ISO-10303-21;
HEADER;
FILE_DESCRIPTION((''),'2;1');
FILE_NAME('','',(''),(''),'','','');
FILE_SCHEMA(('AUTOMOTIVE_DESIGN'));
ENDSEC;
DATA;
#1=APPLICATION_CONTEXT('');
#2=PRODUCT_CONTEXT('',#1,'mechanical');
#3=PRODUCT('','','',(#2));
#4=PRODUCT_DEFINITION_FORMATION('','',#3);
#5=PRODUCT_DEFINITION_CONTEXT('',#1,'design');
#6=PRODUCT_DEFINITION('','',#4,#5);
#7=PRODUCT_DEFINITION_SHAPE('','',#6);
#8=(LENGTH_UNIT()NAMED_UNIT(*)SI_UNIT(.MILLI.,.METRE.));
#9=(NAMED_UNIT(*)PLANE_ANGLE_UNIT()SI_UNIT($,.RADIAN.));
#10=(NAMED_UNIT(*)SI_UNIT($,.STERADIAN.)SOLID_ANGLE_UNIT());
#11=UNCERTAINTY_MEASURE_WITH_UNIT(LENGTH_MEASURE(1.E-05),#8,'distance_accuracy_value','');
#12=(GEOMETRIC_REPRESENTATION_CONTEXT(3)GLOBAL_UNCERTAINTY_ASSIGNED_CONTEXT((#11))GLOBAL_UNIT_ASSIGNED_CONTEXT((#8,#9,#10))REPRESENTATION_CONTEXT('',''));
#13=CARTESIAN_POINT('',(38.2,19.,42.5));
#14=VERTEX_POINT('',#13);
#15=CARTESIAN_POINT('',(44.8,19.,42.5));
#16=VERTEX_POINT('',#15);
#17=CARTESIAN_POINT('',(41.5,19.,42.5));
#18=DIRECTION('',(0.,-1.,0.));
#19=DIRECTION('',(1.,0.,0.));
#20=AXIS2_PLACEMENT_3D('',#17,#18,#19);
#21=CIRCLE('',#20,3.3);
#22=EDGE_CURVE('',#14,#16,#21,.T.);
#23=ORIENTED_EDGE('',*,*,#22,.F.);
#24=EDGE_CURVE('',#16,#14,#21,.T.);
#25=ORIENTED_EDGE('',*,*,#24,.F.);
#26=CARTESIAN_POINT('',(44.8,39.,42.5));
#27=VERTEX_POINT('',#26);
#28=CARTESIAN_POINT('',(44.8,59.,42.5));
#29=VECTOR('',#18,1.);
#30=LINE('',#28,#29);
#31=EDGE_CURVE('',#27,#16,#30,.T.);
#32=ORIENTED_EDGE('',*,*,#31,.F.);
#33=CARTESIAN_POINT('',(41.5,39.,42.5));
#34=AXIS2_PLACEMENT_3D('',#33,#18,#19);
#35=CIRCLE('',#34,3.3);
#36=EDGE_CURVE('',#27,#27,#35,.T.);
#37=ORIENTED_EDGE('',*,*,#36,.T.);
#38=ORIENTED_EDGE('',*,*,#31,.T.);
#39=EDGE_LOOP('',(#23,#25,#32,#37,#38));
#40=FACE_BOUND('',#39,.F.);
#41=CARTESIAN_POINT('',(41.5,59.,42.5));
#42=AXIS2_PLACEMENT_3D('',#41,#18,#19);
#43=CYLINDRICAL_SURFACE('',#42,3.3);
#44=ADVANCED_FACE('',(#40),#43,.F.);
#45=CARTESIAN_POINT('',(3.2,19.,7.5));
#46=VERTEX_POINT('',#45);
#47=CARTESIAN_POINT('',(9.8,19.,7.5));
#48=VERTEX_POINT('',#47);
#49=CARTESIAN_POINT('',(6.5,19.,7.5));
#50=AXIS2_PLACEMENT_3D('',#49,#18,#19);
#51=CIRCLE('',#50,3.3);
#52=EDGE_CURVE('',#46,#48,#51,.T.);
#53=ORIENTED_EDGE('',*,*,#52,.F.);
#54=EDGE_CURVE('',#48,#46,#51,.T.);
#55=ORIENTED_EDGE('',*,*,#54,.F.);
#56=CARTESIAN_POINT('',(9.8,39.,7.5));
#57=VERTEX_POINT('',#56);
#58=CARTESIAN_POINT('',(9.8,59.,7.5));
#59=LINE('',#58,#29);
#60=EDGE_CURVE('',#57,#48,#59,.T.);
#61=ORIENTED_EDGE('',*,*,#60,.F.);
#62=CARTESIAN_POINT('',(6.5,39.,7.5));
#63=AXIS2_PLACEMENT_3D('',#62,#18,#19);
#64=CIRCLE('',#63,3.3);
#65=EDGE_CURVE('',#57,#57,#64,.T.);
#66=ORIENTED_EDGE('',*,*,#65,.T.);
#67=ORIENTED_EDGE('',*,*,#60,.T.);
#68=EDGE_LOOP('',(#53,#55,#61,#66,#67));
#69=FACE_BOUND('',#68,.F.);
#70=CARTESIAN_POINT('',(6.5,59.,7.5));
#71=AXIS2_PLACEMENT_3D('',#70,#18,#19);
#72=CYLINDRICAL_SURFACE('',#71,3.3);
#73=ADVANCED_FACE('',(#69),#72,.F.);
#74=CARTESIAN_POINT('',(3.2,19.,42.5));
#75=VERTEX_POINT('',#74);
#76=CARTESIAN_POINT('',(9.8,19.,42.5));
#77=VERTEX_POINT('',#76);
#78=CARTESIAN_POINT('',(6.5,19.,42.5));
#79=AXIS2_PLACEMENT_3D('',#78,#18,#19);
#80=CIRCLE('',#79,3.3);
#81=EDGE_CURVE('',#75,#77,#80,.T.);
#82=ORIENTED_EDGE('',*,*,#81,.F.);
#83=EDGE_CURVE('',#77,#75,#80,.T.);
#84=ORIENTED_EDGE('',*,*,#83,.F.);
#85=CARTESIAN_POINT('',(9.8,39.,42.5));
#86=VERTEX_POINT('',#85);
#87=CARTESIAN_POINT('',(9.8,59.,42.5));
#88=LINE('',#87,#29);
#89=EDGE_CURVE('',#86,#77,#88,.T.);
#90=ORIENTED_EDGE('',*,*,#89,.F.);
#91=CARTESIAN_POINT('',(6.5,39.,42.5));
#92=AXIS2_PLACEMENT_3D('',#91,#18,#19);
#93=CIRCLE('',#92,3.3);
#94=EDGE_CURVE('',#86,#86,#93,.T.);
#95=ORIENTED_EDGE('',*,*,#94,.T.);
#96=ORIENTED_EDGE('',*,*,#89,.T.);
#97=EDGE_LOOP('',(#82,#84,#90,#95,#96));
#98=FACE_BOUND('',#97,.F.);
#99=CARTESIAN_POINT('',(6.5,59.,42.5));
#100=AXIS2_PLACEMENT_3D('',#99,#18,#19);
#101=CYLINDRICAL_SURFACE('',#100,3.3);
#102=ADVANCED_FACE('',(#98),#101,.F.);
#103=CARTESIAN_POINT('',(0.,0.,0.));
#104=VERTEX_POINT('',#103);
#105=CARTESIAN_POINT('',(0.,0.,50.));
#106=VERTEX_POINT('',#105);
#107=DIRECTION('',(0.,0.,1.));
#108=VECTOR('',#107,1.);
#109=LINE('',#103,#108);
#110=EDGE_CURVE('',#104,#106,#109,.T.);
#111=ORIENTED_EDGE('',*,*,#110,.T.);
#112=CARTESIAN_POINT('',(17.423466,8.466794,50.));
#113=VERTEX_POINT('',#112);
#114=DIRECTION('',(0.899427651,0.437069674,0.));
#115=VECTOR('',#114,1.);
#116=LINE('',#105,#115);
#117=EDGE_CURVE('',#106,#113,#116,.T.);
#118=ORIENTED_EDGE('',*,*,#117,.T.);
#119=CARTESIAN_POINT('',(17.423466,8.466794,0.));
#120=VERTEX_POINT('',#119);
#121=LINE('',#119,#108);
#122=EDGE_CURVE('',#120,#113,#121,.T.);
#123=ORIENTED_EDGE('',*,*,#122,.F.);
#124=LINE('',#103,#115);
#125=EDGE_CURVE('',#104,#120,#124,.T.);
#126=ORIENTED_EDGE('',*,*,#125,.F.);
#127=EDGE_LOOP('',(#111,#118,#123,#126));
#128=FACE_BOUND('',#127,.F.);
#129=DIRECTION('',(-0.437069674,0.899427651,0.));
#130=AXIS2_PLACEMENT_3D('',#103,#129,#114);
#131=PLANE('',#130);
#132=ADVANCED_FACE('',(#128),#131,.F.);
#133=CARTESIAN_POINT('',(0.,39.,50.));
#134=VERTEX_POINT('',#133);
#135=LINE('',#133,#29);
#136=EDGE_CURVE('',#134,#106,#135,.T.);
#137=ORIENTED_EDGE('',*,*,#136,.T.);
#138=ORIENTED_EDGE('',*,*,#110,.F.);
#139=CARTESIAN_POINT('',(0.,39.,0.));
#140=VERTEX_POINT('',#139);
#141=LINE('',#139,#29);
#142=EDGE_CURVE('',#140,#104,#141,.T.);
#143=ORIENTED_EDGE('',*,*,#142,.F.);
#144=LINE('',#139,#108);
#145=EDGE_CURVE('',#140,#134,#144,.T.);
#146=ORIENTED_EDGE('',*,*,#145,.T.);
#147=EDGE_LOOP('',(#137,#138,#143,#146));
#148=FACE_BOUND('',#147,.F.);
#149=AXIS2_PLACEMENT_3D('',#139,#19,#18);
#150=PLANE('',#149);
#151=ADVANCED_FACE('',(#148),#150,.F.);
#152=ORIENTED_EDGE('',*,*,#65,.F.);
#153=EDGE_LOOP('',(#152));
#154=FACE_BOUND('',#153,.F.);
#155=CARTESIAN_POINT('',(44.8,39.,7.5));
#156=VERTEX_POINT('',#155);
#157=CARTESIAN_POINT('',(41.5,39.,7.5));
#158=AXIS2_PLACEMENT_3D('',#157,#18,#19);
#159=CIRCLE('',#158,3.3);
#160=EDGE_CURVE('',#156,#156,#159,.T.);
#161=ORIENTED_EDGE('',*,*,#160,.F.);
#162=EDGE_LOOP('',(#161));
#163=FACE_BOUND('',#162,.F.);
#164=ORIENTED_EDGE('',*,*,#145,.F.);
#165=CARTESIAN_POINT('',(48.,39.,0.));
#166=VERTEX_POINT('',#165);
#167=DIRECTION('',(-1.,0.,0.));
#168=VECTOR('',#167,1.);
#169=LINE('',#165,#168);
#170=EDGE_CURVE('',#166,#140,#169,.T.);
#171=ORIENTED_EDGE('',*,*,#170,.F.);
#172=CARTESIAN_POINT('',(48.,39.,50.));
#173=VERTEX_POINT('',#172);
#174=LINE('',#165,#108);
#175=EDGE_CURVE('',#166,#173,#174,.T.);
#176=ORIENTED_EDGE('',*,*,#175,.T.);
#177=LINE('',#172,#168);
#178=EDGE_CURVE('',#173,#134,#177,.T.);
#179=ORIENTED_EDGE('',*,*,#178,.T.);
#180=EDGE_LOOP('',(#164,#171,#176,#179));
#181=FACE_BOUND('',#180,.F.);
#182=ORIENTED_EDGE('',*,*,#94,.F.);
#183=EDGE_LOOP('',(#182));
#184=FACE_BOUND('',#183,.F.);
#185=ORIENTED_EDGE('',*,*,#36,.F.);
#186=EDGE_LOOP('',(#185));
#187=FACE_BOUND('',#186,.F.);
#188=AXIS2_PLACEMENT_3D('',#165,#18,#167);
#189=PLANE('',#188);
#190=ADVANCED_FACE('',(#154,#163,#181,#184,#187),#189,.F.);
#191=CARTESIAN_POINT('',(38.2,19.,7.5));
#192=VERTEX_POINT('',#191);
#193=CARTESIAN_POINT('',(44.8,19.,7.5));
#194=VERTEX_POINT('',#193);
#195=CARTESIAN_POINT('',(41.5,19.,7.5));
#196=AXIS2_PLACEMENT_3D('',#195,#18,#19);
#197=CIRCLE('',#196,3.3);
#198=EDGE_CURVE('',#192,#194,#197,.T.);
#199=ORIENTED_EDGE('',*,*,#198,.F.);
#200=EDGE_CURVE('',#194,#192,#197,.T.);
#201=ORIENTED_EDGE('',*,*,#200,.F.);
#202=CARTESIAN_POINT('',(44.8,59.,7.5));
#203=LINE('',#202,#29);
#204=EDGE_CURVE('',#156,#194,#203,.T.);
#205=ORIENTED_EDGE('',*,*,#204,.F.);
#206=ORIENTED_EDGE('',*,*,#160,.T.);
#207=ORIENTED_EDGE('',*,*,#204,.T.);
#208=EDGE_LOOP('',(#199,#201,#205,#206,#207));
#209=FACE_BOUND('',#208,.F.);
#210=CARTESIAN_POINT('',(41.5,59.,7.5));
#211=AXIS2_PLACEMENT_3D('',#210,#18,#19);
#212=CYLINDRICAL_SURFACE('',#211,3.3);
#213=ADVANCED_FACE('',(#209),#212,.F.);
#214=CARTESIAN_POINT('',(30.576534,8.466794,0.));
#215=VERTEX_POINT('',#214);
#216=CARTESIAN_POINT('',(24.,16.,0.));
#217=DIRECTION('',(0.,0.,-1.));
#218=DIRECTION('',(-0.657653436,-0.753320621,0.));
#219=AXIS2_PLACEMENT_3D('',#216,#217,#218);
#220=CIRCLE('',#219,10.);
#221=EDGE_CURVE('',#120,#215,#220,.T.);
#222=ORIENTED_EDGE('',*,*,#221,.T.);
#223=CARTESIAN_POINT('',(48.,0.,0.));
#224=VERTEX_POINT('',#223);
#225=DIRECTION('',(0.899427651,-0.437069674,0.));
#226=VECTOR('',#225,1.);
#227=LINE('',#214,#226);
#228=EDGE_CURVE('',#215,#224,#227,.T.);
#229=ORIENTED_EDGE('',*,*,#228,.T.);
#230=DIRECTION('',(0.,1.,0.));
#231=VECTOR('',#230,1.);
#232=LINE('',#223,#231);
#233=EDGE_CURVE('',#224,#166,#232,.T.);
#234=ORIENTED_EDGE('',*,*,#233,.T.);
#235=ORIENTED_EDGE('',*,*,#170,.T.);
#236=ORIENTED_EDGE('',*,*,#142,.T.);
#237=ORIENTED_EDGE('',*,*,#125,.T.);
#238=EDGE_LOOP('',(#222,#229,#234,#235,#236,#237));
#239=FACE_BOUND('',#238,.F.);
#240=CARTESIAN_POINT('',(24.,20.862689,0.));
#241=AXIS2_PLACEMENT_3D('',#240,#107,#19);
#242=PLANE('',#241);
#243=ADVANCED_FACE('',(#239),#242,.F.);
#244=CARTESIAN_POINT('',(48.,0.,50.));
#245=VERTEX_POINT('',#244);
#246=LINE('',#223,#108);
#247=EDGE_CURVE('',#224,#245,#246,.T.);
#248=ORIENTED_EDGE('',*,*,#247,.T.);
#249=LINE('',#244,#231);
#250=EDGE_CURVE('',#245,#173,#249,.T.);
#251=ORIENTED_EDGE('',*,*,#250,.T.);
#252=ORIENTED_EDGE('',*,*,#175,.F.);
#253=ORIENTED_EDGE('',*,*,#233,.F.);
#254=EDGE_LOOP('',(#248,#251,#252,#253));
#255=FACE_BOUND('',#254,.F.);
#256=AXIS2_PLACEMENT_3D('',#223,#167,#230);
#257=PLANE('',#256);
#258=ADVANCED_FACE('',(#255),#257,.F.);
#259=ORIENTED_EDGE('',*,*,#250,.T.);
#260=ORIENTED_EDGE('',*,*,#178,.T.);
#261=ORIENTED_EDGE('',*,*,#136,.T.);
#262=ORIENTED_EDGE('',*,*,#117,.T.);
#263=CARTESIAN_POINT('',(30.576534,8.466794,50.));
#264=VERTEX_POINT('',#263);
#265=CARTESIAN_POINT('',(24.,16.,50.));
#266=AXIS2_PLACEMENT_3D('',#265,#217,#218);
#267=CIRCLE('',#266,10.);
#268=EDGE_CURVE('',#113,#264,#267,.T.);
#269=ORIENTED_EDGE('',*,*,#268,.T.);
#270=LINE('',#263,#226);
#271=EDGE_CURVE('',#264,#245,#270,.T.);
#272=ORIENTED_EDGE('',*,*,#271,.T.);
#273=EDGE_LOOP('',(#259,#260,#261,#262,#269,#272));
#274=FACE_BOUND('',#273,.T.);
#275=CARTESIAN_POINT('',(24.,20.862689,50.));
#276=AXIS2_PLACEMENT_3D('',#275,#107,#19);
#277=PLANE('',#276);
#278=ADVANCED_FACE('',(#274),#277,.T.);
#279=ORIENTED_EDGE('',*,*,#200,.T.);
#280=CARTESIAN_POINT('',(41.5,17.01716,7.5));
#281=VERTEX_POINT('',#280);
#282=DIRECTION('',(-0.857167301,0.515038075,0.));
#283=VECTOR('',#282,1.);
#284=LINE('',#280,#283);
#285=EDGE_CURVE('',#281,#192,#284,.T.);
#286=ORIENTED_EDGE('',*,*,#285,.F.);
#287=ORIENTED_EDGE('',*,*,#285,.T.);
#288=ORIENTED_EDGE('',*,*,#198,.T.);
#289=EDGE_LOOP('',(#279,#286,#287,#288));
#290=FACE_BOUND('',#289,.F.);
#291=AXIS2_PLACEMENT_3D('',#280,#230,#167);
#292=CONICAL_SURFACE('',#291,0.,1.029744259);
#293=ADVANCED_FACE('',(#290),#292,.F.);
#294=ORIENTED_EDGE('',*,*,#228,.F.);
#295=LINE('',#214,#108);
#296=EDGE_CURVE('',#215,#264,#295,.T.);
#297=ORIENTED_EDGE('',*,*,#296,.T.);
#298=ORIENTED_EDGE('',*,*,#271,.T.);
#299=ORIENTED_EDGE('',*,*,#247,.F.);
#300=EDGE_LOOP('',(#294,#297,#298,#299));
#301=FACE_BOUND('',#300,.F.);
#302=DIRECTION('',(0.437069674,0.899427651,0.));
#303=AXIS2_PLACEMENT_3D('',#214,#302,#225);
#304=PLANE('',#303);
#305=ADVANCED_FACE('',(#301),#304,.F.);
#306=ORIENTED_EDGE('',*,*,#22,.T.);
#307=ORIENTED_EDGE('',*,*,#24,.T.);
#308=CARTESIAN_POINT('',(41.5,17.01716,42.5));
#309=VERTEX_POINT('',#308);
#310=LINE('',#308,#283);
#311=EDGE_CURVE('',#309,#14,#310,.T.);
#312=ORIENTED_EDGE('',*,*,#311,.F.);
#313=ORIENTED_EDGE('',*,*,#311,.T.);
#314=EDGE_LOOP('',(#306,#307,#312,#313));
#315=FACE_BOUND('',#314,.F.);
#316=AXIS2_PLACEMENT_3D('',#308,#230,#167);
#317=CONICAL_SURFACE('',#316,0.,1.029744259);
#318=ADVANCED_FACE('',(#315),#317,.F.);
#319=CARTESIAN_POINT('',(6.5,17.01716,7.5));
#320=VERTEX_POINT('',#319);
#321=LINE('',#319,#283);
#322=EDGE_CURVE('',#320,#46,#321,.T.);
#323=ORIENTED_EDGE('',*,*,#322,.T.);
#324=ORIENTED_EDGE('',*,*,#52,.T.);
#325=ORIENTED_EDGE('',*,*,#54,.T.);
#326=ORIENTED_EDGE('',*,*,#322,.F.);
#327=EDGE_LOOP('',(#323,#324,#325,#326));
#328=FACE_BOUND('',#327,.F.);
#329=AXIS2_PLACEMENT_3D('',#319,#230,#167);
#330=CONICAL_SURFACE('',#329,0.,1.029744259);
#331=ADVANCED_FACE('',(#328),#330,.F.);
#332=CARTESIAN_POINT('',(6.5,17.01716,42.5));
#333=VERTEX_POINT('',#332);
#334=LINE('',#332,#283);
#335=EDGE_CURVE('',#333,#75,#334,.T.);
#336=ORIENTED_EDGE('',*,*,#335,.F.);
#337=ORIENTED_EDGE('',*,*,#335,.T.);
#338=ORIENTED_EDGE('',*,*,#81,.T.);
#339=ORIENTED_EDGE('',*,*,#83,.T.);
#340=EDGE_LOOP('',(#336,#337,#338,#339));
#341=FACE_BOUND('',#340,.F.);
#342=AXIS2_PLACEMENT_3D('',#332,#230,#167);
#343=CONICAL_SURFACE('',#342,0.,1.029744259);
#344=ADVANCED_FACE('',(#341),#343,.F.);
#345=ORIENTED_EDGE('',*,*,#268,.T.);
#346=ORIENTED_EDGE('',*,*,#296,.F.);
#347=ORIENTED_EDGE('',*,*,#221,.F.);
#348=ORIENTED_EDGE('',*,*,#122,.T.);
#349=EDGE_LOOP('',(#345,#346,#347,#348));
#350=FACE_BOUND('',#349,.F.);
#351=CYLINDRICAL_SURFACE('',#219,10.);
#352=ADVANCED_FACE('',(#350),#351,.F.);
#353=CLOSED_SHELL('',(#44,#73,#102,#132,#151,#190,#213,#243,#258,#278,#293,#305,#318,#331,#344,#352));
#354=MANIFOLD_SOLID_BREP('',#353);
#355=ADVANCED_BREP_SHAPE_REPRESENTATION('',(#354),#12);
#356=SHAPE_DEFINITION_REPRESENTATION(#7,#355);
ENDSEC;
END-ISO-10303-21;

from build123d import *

# Parameters (mm, degrees)
F1_DEPTH = 50
F3_D     = 6.6
F3_DEPTH = 20
F3_TIP   = 1.9828400428


# Not quite as in the source:
# - a feature names something its author has since deleted; it is built from what else it names


with BuildPart() as f1:
    # F0 (on Top) → F1 (new body)
    with BuildSketch(Plane.XY):
        with BuildLine():
            Line((0, 39), (0, 0))
            Line((0, 0), (17.4234656395, 8.4667937898))
            ThreePointArc((17.4234656395, 8.4667937898), (24, 26), (30.5765343605, 8.4667937898))
            Line((30.5765343605, 8.4667937898), (48, 0))
            Line((48, 0), (48, 39))
            Line((48, 39), (0, 39))
        make_face()
    extrude(amount=F1_DEPTH)

    # F3
    with Locations(Plane(origin=(0, 39, 0), x_dir=(-1, 0, 0), z_dir=(0, 1, 0))):
        with Locations((-41.5, 42.5), (-41.5, 7.5), (-6.5, 7.5), (-6.5, 42.5)):
            Hole(F3_D / 2, depth=F3_DEPTH)
            with Locations((0, 0, -(F3_DEPTH + F3_TIP / 2))):  # 118° drill point
                Cone(0, F3_D / 2, F3_TIP, mode=Mode.SUBTRACT)


solid = f1.part
